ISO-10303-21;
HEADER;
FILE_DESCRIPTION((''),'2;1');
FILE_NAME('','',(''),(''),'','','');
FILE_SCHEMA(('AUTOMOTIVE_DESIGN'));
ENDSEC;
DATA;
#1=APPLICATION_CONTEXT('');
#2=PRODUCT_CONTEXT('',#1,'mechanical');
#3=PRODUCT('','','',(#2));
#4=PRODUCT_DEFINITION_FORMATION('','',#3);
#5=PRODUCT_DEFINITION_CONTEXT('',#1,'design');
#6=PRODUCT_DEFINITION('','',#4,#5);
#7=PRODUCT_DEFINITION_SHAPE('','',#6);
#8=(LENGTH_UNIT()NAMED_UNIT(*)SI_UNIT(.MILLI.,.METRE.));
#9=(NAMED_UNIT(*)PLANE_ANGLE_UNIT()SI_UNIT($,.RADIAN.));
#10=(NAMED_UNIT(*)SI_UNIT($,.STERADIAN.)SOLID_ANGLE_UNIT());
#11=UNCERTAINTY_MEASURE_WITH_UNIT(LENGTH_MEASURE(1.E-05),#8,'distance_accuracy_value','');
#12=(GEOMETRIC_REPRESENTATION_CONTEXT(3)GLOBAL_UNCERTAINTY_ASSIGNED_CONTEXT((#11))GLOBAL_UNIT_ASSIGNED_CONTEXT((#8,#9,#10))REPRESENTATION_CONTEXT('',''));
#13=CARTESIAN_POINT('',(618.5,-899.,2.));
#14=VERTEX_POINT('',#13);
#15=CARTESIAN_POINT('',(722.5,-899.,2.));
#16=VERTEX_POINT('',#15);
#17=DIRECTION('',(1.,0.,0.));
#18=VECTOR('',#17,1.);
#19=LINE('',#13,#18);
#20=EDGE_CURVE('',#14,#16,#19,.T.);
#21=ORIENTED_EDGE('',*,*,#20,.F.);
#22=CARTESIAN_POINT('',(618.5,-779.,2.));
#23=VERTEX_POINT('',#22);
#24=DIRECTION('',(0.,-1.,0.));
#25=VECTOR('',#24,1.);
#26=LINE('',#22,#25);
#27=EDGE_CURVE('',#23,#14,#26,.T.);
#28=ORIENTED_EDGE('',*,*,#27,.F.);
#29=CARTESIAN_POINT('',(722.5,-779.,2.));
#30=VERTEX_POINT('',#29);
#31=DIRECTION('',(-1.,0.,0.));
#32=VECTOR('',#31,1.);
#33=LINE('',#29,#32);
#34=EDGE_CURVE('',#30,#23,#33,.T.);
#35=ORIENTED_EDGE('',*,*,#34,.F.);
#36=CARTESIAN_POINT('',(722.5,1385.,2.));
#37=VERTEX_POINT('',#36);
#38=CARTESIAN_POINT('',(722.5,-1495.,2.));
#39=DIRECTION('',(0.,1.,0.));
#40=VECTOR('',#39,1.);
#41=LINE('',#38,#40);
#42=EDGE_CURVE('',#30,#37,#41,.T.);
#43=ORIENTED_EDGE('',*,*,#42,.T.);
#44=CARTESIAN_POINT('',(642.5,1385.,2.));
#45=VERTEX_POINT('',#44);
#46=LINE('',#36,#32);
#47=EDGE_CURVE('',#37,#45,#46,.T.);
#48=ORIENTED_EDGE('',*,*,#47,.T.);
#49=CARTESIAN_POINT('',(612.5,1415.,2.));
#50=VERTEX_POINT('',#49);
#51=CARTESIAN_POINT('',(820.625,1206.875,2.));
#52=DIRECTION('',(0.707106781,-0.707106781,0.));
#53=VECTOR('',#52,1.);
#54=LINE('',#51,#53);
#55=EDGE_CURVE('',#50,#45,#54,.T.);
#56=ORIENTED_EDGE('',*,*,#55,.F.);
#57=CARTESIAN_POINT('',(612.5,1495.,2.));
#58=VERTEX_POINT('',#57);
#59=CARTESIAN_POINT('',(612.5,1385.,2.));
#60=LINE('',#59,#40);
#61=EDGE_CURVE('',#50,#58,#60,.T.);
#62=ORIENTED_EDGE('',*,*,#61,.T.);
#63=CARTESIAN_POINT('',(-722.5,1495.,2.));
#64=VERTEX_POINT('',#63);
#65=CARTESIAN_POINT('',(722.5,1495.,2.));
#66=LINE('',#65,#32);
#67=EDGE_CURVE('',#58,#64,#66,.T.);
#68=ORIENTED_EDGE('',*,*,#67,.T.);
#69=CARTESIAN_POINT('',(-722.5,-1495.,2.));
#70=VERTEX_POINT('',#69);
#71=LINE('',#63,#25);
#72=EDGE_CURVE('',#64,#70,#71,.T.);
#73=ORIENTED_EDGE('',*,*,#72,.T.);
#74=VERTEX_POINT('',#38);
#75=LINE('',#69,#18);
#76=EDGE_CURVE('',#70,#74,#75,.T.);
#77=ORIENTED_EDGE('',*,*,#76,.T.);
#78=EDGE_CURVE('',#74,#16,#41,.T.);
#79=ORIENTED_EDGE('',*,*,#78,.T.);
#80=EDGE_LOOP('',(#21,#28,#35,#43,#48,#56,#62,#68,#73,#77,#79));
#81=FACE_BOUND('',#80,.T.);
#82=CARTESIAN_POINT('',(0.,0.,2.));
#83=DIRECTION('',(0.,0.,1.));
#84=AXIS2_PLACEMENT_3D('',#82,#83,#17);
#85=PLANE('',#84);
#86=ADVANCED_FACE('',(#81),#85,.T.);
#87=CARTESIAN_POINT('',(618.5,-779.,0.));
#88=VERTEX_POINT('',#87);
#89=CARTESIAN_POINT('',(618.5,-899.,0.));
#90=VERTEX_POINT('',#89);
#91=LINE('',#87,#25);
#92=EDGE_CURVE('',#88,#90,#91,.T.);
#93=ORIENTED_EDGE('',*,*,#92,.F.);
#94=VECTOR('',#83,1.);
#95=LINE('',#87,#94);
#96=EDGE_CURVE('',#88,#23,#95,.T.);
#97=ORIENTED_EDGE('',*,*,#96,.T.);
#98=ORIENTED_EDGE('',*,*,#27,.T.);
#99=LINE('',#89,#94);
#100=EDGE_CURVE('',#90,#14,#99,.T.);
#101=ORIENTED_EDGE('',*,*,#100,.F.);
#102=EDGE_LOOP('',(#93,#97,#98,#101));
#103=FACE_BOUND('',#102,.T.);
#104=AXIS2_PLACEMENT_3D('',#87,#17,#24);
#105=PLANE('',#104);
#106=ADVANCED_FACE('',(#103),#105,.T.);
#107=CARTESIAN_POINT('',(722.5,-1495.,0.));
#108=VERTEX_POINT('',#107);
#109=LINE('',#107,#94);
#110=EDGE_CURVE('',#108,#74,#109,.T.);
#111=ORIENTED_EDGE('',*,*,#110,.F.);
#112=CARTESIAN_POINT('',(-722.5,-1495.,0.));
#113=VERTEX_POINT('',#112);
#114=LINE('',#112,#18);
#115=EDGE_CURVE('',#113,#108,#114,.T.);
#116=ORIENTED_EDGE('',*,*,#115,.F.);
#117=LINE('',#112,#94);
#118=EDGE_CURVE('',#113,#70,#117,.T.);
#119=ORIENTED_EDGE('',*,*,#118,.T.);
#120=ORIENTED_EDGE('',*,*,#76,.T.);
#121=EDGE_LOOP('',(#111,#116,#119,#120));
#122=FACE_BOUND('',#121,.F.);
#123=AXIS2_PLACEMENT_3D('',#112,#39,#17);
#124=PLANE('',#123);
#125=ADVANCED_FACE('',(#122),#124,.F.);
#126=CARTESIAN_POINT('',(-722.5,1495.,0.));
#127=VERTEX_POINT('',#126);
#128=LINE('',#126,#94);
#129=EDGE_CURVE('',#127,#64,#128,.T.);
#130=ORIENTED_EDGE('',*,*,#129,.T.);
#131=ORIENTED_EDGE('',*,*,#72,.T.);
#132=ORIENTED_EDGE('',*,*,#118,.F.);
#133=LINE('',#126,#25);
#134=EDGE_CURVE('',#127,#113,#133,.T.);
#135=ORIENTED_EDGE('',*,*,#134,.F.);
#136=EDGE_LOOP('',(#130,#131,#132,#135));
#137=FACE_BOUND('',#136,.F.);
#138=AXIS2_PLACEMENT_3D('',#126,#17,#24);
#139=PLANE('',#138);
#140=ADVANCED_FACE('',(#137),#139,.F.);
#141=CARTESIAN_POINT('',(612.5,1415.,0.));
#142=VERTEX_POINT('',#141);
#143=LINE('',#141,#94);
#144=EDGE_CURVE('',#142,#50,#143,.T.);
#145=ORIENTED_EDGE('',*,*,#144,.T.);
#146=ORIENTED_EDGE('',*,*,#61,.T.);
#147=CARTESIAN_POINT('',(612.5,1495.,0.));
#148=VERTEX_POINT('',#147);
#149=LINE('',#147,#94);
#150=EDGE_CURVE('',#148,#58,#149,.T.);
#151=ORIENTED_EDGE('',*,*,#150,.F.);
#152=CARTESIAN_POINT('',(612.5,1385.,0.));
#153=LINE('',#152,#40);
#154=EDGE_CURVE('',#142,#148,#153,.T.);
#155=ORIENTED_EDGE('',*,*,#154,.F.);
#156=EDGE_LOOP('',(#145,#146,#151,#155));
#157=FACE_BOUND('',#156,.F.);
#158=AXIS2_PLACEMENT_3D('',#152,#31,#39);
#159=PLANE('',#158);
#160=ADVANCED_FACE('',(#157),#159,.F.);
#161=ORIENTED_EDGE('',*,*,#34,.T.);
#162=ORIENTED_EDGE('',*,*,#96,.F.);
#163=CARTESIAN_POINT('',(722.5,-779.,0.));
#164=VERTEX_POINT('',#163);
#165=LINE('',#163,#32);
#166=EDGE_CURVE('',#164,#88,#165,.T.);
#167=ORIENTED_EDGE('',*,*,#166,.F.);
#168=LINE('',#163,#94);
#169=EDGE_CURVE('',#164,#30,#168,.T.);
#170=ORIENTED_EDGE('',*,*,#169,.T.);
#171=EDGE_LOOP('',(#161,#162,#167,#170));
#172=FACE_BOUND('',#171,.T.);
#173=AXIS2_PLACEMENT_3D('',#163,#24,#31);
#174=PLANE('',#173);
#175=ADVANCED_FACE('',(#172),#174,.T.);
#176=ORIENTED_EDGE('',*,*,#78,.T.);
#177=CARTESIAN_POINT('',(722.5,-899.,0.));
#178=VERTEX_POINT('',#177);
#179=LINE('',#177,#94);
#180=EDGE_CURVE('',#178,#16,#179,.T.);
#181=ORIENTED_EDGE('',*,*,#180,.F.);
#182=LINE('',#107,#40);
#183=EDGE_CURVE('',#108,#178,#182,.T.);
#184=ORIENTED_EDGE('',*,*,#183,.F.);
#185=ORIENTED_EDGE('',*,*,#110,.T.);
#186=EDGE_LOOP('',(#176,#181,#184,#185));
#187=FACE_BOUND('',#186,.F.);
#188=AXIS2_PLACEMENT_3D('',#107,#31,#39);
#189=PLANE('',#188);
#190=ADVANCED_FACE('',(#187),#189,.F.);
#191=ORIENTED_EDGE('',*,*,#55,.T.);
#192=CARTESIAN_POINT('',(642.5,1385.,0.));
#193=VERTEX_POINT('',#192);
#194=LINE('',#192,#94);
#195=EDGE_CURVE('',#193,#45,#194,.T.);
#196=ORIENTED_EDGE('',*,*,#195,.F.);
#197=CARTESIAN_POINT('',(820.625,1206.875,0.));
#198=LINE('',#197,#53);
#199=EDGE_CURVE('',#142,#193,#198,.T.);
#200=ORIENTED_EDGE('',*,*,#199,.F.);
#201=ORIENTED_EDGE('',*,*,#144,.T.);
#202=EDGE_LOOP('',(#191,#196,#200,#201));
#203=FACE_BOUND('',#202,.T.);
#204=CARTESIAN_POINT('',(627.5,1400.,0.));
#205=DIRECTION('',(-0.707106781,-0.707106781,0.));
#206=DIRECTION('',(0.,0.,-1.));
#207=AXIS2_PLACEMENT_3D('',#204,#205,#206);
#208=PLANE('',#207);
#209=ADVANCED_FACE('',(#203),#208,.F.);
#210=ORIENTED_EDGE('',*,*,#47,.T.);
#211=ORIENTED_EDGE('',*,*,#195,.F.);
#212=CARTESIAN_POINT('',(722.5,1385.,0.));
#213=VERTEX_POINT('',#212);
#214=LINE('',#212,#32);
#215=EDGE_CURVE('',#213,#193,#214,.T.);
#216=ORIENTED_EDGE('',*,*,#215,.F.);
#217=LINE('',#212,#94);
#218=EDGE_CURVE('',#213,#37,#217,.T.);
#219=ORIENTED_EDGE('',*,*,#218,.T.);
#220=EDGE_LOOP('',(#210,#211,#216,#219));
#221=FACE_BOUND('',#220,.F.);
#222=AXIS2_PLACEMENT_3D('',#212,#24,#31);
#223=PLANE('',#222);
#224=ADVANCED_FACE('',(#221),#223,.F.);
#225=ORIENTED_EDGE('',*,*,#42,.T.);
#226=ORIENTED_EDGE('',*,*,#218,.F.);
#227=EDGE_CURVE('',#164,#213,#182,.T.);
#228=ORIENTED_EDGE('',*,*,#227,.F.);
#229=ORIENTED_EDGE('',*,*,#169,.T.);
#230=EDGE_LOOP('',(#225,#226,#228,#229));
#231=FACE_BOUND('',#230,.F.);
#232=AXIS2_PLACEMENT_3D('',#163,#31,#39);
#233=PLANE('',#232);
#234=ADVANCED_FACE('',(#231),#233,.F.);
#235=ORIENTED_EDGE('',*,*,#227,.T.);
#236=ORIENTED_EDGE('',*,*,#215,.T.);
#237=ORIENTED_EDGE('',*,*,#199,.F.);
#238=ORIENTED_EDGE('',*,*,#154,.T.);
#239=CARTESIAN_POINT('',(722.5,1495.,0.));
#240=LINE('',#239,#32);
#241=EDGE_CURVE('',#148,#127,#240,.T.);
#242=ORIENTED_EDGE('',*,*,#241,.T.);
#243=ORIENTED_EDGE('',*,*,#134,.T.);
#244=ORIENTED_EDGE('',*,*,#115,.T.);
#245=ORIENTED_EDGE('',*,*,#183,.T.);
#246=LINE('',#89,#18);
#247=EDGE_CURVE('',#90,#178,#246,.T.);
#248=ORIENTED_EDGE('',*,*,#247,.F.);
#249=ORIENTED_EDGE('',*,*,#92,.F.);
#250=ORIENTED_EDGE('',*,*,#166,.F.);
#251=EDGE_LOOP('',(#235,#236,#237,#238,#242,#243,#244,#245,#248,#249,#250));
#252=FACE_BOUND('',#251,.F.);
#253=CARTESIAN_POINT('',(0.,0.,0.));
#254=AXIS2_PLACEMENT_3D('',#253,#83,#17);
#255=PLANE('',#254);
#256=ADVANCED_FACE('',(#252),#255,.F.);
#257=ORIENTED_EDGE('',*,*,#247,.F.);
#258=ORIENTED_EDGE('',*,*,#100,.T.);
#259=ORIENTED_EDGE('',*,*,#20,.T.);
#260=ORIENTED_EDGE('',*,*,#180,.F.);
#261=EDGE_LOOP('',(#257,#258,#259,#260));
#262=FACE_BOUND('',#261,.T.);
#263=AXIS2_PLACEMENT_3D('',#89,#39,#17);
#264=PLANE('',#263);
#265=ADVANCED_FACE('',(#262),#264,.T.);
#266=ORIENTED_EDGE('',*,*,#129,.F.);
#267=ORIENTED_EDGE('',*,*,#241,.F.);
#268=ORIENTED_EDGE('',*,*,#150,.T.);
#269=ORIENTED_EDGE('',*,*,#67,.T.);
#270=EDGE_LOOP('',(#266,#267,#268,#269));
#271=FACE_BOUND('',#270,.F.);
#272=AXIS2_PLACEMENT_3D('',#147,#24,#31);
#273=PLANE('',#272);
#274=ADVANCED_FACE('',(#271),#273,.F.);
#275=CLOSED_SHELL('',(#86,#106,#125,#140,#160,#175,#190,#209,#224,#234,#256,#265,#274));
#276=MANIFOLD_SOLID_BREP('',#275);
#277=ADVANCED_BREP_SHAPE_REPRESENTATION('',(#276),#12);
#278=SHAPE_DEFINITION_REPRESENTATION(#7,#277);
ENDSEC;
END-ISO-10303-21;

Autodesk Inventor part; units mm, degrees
ref_plane "YZ Plane" through (0, 0, 0) normal (1, 0, 0) x (0, 1, 0)
ref_plane "XZ Plane" through (0, 0, 0) normal (0, 1, 0) x (-1, 0, 0)
ref_plane "XY Plane" through (0, 0, 0) normal (0, 0, 1) x (1, 0, 0)
sketch "Sketch1" plane through (0, 0, 0) normal (0, 0, 1) x (1, 0, 0)
  line L0 (-722.5, -1495) -> (722.5, -1495)
  line L1 (722.5, -1495) -> (722.5, 1495)
  line L2 (722.5, 1495) -> (-722.5, 1495)
  line L3 (-722.5, 1495) -> (-722.5, -1495)
  line L4 (-722.5, -1495) -> (722.5, 1495) construction
  line L5 (722.5, -1495) -> (-722.5, 1495) construction
  line L6 (722.5, -779) -> (618.5, -779)
  line L7 (618.5, -779) -> (618.5, -899)
  line L8 (618.5, -899) -> (722.5, -899)
  line L9 (722.5, -899) -> (722.5, -779)
  line L10 (722.5, 1385) -> (612.5, 1385)
  line L11 (612.5, 1385) -> (612.5, 1495)
  point P0 (0, 0)
  point P1 (722.5, -899)
  dimension "d154" = 1445
  dimension "d155" = 2990
  dimension "d159" = 120
  dimension "d161" = 104
  dimension "d162" = 596
  dimension "d163" = 110
extrude "Plate5" add sketch "Sketch1" along normal blind 2 contours L3 L2 L11 L10 L1 L6 L7 L8 L0
chamfer "Corner Chamfer2" distance 30 angle 45 1 edges at (612.5, 1385, 1)
properties part number "PNS-0113 floor sheet 3" material "Stainless Steel"
